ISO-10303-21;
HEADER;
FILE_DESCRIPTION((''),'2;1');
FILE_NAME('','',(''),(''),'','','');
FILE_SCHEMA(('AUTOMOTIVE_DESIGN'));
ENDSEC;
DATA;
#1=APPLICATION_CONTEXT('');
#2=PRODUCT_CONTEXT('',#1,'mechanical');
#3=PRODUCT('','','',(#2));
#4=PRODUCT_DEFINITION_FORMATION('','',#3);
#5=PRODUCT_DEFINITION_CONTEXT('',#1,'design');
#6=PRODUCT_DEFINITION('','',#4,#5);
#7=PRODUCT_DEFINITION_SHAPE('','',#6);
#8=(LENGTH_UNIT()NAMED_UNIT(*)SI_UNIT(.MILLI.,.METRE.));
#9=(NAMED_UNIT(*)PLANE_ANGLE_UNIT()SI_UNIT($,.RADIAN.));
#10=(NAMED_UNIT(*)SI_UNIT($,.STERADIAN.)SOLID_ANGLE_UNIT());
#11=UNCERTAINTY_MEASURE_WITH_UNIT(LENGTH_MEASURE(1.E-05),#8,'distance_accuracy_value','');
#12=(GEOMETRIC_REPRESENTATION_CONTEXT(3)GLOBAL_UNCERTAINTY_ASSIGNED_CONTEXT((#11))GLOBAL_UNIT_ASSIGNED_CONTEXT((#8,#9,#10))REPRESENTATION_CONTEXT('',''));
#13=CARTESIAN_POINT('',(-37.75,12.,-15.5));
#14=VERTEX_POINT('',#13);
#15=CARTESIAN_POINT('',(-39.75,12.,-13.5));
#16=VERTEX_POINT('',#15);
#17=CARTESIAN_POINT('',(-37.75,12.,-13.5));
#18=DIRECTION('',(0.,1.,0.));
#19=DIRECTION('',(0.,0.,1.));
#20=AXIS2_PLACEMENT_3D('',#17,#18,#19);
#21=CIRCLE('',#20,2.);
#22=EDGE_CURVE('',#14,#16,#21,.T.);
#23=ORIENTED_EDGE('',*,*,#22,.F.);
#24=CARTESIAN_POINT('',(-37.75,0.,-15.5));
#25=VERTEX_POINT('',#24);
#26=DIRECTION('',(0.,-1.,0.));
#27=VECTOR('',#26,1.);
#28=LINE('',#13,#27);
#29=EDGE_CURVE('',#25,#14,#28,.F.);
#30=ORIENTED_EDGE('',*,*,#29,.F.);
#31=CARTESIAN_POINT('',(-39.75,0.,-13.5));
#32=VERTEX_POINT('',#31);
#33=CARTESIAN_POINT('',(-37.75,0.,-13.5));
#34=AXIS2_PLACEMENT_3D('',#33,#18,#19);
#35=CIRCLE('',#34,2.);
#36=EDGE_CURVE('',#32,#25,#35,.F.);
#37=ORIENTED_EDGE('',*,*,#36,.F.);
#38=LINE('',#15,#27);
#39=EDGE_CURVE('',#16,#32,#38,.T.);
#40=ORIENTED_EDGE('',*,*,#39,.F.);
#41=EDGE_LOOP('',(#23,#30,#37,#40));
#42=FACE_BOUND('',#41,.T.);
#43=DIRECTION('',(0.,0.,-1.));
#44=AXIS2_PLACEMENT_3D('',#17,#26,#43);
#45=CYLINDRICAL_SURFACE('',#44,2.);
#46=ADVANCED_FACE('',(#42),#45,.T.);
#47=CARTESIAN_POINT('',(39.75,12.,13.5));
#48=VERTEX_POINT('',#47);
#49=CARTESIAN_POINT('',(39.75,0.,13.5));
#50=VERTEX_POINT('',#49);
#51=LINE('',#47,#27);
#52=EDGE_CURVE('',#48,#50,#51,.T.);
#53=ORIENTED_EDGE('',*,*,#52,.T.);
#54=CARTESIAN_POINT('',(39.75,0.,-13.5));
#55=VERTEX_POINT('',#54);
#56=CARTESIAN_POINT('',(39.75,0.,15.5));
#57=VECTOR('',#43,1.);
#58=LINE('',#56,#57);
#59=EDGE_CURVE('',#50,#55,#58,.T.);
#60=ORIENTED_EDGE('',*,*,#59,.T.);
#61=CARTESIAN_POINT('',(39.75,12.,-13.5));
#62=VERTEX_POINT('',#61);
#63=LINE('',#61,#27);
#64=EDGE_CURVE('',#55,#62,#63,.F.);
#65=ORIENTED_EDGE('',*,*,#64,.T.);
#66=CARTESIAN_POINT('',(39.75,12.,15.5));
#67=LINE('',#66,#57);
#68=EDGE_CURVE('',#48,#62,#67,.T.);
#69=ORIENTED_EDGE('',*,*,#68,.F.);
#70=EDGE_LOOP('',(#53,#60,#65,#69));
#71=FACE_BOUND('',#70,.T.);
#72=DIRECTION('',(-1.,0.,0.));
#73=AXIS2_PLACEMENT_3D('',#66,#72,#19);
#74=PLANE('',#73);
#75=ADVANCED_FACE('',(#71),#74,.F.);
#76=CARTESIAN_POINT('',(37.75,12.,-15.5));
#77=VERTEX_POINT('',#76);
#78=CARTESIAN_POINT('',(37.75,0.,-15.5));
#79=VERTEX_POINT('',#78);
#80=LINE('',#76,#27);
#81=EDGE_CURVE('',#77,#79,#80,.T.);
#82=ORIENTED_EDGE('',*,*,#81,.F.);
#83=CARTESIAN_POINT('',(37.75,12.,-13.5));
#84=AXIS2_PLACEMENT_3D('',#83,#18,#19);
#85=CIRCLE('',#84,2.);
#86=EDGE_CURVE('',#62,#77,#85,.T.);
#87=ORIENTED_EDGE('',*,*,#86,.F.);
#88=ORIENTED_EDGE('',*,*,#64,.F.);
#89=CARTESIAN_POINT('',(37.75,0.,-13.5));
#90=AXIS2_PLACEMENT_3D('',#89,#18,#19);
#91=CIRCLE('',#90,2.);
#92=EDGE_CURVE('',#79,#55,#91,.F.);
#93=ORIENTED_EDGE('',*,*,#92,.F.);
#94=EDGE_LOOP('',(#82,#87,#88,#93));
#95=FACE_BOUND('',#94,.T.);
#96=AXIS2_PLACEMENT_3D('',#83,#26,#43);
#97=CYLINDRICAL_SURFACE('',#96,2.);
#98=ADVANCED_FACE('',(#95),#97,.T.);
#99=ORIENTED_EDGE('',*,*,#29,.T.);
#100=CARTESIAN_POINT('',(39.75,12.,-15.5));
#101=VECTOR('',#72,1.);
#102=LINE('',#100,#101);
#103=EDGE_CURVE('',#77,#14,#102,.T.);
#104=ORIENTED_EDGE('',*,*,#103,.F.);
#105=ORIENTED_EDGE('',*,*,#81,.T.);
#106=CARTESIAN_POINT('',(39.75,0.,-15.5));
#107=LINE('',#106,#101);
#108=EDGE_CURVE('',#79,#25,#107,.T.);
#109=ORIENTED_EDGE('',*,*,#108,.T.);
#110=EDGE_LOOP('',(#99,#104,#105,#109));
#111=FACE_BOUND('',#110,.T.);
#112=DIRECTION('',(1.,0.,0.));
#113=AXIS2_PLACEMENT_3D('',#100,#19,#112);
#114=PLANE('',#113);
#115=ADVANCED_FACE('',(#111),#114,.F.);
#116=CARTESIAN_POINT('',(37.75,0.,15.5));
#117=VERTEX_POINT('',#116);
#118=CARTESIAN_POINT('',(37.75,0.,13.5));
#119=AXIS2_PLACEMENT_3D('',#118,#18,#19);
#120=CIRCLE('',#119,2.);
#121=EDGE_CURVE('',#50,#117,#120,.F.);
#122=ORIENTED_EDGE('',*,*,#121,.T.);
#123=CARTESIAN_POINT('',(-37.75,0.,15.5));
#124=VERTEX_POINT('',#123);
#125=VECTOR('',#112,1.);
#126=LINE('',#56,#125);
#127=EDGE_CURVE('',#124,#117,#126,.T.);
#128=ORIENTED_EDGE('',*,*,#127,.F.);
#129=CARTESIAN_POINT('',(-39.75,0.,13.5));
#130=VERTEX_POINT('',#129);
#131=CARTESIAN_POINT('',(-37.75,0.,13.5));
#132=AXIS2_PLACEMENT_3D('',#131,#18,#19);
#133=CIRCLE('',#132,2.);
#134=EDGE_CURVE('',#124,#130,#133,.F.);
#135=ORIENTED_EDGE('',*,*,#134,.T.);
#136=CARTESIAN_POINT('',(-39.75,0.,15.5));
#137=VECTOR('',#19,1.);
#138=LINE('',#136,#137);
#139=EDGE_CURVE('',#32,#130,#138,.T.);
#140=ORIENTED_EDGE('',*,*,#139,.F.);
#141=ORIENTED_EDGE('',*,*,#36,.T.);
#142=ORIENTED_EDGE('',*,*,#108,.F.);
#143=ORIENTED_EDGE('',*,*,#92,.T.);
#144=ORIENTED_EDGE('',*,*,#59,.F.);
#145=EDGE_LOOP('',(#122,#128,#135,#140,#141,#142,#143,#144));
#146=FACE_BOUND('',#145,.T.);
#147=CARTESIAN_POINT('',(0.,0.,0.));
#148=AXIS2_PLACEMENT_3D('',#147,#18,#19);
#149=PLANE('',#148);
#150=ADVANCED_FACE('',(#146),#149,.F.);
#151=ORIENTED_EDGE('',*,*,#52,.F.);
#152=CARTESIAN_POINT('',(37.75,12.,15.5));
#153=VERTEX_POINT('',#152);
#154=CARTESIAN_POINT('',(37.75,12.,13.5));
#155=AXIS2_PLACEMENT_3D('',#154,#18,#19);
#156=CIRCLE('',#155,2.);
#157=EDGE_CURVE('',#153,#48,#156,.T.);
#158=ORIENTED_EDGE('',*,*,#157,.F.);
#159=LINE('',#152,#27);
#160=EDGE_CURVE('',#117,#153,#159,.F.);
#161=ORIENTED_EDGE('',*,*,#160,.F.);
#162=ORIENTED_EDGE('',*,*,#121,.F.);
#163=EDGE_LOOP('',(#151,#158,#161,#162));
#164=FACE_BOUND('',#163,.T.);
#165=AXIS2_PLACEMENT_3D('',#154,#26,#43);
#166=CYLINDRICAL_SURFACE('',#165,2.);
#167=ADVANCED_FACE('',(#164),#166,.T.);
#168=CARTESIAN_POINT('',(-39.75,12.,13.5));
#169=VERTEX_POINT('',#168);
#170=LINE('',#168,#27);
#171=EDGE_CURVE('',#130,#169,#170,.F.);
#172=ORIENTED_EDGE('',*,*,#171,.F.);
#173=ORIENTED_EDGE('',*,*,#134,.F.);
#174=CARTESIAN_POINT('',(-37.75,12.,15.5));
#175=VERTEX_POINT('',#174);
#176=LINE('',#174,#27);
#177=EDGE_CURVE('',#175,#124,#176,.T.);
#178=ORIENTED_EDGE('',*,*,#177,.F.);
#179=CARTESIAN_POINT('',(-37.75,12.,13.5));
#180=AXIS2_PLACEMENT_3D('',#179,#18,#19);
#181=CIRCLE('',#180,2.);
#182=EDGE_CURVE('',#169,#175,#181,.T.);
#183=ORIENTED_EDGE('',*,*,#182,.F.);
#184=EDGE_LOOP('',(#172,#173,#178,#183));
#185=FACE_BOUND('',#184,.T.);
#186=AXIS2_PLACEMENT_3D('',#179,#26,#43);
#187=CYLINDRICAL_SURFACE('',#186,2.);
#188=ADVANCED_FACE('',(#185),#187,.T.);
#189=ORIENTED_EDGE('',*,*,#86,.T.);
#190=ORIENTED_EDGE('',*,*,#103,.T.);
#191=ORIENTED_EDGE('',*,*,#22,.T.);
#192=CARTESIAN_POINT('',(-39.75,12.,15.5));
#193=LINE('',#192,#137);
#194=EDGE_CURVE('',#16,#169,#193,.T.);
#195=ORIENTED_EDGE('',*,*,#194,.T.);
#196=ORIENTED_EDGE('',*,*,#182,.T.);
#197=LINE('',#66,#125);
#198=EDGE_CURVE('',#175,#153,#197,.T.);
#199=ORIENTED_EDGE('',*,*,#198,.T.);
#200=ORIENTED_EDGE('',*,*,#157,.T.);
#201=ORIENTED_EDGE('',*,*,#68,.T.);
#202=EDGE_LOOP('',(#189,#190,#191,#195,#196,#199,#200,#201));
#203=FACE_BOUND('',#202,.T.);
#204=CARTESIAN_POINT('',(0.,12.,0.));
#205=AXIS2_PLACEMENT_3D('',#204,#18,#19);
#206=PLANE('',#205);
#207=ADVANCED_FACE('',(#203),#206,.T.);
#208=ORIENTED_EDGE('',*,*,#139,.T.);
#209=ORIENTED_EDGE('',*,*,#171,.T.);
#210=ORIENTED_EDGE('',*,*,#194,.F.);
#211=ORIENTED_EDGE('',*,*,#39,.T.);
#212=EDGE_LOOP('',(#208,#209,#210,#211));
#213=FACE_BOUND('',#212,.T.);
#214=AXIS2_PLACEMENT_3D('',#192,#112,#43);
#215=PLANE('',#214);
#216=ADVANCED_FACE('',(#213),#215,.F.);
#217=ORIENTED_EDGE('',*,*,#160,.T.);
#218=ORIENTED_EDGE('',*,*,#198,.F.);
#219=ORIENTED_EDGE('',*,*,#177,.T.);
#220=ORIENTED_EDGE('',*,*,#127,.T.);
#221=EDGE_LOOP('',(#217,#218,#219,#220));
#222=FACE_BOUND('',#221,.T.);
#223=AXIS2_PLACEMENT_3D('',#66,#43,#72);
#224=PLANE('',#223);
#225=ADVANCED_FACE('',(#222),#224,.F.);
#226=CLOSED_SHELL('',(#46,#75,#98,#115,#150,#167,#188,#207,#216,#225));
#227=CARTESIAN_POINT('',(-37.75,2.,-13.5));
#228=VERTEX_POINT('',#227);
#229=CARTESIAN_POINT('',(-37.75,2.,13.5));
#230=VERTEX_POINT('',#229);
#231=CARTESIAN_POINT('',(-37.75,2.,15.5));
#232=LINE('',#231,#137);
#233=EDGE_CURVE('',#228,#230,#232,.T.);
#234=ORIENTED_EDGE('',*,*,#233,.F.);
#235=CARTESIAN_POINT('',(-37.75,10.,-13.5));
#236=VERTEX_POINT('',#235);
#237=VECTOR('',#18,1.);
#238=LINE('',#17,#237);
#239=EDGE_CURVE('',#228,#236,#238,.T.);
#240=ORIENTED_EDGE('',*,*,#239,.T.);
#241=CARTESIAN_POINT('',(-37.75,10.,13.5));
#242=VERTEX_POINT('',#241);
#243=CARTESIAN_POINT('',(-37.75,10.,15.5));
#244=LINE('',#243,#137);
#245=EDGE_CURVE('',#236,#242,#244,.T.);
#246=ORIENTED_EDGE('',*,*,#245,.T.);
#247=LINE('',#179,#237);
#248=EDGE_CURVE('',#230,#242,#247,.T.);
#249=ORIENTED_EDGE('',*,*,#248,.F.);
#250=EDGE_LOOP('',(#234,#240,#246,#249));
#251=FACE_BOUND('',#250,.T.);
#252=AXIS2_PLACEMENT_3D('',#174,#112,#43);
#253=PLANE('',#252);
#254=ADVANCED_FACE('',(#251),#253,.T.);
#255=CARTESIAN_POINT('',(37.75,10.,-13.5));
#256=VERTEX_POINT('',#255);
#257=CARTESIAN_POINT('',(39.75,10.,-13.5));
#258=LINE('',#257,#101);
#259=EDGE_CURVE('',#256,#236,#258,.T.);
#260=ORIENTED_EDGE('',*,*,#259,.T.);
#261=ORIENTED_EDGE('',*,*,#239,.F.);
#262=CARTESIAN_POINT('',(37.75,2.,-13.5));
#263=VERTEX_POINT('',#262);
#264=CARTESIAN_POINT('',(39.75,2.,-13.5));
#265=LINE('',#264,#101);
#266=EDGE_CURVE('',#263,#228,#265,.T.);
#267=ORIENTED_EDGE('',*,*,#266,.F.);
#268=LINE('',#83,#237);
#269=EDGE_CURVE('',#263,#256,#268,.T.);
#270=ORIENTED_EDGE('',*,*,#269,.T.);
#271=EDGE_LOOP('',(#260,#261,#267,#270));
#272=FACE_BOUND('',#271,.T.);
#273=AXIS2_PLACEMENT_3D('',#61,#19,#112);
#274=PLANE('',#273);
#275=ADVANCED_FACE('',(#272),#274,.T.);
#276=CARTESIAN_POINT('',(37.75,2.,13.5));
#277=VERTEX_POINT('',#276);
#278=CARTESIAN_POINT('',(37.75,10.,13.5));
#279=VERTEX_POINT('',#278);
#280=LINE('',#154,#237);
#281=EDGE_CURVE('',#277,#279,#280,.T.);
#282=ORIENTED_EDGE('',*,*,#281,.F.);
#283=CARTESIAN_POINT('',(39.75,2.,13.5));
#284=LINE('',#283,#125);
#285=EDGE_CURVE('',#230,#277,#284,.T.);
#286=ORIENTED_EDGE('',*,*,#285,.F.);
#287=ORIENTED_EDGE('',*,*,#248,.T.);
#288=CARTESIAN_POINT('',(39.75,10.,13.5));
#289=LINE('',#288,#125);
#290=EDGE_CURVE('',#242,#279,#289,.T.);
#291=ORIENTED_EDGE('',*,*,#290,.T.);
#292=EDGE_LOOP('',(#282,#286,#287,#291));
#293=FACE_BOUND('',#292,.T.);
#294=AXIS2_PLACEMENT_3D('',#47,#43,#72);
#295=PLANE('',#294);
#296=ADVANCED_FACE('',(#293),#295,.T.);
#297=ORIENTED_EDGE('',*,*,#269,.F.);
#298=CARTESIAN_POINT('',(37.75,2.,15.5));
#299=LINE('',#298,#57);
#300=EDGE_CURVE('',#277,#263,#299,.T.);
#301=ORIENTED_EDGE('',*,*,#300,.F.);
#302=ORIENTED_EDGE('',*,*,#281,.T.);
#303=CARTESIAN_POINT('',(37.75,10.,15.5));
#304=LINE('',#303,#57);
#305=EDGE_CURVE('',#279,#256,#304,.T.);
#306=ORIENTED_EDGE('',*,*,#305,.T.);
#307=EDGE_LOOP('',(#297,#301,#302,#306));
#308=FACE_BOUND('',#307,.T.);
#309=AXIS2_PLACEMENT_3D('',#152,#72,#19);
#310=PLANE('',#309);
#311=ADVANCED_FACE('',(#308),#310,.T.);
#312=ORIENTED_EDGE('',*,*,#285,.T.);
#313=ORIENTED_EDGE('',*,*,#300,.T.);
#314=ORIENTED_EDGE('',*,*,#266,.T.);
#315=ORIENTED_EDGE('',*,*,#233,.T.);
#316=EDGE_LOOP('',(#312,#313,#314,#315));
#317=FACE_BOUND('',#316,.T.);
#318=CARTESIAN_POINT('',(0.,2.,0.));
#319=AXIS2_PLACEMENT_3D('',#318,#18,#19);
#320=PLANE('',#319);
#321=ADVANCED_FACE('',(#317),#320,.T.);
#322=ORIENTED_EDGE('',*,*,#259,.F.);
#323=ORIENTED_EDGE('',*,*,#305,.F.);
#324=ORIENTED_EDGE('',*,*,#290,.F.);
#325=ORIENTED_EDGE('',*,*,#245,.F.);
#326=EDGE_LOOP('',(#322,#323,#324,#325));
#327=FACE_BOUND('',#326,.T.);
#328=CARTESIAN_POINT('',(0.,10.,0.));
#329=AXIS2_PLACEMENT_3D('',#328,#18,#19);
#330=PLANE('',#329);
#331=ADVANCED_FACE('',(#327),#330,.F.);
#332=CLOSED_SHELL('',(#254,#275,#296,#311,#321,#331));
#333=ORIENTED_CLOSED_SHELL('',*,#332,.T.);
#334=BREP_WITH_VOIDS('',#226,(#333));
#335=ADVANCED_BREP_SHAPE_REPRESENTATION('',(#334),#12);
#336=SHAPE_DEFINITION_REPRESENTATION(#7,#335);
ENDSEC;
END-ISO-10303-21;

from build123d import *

# Parameters (mm, degrees)
SKETCH1_W           = 79.5
SKETCH1_H           = 31
BOSS_EXTRUDE1_DEPTH = 12
FILLET1_R           = 2
SHELL1_START        = -37.75
SHELL1_OUTLINE_W    = 8
SHELL1_OUTLINE_H    = 27
SHELL1_DEPTH        = 75.5


# Read off the part's stored shape, not the designer's step: Shell1
with BuildPart() as part:
    # Sketch1 → Boss-Extrude1 (new body)
    with BuildSketch(Plane(origin=(0, 0, 0), x_dir=(1, 0, 0), z_dir=(0, 1, 0))):
        Rectangle(SKETCH1_W, SKETCH1_H)
    extrude(amount=BOSS_EXTRUDE1_DEPTH)

    # Fillet1
    fillet1_edges = [part.edges().sort_by_distance(p)[0] for p in [
        (-39.75, 6, -15.5),
        (39.75, 6, -15.5),
        (39.75, 6, 15.5),
        (-39.75, 6, 15.5),
    ]]
    fillet(fillet1_edges, radius=FILLET1_R)

    # Shell1 outline → Shell1 (cut)
    with BuildSketch(Plane.YZ.offset(SHELL1_START)):
        with Locations((6, 0)):
            Rectangle(SHELL1_OUTLINE_W, SHELL1_OUTLINE_H)
    extrude(amount=SHELL1_DEPTH, mode=Mode.SUBTRACT)


solid = part.part
